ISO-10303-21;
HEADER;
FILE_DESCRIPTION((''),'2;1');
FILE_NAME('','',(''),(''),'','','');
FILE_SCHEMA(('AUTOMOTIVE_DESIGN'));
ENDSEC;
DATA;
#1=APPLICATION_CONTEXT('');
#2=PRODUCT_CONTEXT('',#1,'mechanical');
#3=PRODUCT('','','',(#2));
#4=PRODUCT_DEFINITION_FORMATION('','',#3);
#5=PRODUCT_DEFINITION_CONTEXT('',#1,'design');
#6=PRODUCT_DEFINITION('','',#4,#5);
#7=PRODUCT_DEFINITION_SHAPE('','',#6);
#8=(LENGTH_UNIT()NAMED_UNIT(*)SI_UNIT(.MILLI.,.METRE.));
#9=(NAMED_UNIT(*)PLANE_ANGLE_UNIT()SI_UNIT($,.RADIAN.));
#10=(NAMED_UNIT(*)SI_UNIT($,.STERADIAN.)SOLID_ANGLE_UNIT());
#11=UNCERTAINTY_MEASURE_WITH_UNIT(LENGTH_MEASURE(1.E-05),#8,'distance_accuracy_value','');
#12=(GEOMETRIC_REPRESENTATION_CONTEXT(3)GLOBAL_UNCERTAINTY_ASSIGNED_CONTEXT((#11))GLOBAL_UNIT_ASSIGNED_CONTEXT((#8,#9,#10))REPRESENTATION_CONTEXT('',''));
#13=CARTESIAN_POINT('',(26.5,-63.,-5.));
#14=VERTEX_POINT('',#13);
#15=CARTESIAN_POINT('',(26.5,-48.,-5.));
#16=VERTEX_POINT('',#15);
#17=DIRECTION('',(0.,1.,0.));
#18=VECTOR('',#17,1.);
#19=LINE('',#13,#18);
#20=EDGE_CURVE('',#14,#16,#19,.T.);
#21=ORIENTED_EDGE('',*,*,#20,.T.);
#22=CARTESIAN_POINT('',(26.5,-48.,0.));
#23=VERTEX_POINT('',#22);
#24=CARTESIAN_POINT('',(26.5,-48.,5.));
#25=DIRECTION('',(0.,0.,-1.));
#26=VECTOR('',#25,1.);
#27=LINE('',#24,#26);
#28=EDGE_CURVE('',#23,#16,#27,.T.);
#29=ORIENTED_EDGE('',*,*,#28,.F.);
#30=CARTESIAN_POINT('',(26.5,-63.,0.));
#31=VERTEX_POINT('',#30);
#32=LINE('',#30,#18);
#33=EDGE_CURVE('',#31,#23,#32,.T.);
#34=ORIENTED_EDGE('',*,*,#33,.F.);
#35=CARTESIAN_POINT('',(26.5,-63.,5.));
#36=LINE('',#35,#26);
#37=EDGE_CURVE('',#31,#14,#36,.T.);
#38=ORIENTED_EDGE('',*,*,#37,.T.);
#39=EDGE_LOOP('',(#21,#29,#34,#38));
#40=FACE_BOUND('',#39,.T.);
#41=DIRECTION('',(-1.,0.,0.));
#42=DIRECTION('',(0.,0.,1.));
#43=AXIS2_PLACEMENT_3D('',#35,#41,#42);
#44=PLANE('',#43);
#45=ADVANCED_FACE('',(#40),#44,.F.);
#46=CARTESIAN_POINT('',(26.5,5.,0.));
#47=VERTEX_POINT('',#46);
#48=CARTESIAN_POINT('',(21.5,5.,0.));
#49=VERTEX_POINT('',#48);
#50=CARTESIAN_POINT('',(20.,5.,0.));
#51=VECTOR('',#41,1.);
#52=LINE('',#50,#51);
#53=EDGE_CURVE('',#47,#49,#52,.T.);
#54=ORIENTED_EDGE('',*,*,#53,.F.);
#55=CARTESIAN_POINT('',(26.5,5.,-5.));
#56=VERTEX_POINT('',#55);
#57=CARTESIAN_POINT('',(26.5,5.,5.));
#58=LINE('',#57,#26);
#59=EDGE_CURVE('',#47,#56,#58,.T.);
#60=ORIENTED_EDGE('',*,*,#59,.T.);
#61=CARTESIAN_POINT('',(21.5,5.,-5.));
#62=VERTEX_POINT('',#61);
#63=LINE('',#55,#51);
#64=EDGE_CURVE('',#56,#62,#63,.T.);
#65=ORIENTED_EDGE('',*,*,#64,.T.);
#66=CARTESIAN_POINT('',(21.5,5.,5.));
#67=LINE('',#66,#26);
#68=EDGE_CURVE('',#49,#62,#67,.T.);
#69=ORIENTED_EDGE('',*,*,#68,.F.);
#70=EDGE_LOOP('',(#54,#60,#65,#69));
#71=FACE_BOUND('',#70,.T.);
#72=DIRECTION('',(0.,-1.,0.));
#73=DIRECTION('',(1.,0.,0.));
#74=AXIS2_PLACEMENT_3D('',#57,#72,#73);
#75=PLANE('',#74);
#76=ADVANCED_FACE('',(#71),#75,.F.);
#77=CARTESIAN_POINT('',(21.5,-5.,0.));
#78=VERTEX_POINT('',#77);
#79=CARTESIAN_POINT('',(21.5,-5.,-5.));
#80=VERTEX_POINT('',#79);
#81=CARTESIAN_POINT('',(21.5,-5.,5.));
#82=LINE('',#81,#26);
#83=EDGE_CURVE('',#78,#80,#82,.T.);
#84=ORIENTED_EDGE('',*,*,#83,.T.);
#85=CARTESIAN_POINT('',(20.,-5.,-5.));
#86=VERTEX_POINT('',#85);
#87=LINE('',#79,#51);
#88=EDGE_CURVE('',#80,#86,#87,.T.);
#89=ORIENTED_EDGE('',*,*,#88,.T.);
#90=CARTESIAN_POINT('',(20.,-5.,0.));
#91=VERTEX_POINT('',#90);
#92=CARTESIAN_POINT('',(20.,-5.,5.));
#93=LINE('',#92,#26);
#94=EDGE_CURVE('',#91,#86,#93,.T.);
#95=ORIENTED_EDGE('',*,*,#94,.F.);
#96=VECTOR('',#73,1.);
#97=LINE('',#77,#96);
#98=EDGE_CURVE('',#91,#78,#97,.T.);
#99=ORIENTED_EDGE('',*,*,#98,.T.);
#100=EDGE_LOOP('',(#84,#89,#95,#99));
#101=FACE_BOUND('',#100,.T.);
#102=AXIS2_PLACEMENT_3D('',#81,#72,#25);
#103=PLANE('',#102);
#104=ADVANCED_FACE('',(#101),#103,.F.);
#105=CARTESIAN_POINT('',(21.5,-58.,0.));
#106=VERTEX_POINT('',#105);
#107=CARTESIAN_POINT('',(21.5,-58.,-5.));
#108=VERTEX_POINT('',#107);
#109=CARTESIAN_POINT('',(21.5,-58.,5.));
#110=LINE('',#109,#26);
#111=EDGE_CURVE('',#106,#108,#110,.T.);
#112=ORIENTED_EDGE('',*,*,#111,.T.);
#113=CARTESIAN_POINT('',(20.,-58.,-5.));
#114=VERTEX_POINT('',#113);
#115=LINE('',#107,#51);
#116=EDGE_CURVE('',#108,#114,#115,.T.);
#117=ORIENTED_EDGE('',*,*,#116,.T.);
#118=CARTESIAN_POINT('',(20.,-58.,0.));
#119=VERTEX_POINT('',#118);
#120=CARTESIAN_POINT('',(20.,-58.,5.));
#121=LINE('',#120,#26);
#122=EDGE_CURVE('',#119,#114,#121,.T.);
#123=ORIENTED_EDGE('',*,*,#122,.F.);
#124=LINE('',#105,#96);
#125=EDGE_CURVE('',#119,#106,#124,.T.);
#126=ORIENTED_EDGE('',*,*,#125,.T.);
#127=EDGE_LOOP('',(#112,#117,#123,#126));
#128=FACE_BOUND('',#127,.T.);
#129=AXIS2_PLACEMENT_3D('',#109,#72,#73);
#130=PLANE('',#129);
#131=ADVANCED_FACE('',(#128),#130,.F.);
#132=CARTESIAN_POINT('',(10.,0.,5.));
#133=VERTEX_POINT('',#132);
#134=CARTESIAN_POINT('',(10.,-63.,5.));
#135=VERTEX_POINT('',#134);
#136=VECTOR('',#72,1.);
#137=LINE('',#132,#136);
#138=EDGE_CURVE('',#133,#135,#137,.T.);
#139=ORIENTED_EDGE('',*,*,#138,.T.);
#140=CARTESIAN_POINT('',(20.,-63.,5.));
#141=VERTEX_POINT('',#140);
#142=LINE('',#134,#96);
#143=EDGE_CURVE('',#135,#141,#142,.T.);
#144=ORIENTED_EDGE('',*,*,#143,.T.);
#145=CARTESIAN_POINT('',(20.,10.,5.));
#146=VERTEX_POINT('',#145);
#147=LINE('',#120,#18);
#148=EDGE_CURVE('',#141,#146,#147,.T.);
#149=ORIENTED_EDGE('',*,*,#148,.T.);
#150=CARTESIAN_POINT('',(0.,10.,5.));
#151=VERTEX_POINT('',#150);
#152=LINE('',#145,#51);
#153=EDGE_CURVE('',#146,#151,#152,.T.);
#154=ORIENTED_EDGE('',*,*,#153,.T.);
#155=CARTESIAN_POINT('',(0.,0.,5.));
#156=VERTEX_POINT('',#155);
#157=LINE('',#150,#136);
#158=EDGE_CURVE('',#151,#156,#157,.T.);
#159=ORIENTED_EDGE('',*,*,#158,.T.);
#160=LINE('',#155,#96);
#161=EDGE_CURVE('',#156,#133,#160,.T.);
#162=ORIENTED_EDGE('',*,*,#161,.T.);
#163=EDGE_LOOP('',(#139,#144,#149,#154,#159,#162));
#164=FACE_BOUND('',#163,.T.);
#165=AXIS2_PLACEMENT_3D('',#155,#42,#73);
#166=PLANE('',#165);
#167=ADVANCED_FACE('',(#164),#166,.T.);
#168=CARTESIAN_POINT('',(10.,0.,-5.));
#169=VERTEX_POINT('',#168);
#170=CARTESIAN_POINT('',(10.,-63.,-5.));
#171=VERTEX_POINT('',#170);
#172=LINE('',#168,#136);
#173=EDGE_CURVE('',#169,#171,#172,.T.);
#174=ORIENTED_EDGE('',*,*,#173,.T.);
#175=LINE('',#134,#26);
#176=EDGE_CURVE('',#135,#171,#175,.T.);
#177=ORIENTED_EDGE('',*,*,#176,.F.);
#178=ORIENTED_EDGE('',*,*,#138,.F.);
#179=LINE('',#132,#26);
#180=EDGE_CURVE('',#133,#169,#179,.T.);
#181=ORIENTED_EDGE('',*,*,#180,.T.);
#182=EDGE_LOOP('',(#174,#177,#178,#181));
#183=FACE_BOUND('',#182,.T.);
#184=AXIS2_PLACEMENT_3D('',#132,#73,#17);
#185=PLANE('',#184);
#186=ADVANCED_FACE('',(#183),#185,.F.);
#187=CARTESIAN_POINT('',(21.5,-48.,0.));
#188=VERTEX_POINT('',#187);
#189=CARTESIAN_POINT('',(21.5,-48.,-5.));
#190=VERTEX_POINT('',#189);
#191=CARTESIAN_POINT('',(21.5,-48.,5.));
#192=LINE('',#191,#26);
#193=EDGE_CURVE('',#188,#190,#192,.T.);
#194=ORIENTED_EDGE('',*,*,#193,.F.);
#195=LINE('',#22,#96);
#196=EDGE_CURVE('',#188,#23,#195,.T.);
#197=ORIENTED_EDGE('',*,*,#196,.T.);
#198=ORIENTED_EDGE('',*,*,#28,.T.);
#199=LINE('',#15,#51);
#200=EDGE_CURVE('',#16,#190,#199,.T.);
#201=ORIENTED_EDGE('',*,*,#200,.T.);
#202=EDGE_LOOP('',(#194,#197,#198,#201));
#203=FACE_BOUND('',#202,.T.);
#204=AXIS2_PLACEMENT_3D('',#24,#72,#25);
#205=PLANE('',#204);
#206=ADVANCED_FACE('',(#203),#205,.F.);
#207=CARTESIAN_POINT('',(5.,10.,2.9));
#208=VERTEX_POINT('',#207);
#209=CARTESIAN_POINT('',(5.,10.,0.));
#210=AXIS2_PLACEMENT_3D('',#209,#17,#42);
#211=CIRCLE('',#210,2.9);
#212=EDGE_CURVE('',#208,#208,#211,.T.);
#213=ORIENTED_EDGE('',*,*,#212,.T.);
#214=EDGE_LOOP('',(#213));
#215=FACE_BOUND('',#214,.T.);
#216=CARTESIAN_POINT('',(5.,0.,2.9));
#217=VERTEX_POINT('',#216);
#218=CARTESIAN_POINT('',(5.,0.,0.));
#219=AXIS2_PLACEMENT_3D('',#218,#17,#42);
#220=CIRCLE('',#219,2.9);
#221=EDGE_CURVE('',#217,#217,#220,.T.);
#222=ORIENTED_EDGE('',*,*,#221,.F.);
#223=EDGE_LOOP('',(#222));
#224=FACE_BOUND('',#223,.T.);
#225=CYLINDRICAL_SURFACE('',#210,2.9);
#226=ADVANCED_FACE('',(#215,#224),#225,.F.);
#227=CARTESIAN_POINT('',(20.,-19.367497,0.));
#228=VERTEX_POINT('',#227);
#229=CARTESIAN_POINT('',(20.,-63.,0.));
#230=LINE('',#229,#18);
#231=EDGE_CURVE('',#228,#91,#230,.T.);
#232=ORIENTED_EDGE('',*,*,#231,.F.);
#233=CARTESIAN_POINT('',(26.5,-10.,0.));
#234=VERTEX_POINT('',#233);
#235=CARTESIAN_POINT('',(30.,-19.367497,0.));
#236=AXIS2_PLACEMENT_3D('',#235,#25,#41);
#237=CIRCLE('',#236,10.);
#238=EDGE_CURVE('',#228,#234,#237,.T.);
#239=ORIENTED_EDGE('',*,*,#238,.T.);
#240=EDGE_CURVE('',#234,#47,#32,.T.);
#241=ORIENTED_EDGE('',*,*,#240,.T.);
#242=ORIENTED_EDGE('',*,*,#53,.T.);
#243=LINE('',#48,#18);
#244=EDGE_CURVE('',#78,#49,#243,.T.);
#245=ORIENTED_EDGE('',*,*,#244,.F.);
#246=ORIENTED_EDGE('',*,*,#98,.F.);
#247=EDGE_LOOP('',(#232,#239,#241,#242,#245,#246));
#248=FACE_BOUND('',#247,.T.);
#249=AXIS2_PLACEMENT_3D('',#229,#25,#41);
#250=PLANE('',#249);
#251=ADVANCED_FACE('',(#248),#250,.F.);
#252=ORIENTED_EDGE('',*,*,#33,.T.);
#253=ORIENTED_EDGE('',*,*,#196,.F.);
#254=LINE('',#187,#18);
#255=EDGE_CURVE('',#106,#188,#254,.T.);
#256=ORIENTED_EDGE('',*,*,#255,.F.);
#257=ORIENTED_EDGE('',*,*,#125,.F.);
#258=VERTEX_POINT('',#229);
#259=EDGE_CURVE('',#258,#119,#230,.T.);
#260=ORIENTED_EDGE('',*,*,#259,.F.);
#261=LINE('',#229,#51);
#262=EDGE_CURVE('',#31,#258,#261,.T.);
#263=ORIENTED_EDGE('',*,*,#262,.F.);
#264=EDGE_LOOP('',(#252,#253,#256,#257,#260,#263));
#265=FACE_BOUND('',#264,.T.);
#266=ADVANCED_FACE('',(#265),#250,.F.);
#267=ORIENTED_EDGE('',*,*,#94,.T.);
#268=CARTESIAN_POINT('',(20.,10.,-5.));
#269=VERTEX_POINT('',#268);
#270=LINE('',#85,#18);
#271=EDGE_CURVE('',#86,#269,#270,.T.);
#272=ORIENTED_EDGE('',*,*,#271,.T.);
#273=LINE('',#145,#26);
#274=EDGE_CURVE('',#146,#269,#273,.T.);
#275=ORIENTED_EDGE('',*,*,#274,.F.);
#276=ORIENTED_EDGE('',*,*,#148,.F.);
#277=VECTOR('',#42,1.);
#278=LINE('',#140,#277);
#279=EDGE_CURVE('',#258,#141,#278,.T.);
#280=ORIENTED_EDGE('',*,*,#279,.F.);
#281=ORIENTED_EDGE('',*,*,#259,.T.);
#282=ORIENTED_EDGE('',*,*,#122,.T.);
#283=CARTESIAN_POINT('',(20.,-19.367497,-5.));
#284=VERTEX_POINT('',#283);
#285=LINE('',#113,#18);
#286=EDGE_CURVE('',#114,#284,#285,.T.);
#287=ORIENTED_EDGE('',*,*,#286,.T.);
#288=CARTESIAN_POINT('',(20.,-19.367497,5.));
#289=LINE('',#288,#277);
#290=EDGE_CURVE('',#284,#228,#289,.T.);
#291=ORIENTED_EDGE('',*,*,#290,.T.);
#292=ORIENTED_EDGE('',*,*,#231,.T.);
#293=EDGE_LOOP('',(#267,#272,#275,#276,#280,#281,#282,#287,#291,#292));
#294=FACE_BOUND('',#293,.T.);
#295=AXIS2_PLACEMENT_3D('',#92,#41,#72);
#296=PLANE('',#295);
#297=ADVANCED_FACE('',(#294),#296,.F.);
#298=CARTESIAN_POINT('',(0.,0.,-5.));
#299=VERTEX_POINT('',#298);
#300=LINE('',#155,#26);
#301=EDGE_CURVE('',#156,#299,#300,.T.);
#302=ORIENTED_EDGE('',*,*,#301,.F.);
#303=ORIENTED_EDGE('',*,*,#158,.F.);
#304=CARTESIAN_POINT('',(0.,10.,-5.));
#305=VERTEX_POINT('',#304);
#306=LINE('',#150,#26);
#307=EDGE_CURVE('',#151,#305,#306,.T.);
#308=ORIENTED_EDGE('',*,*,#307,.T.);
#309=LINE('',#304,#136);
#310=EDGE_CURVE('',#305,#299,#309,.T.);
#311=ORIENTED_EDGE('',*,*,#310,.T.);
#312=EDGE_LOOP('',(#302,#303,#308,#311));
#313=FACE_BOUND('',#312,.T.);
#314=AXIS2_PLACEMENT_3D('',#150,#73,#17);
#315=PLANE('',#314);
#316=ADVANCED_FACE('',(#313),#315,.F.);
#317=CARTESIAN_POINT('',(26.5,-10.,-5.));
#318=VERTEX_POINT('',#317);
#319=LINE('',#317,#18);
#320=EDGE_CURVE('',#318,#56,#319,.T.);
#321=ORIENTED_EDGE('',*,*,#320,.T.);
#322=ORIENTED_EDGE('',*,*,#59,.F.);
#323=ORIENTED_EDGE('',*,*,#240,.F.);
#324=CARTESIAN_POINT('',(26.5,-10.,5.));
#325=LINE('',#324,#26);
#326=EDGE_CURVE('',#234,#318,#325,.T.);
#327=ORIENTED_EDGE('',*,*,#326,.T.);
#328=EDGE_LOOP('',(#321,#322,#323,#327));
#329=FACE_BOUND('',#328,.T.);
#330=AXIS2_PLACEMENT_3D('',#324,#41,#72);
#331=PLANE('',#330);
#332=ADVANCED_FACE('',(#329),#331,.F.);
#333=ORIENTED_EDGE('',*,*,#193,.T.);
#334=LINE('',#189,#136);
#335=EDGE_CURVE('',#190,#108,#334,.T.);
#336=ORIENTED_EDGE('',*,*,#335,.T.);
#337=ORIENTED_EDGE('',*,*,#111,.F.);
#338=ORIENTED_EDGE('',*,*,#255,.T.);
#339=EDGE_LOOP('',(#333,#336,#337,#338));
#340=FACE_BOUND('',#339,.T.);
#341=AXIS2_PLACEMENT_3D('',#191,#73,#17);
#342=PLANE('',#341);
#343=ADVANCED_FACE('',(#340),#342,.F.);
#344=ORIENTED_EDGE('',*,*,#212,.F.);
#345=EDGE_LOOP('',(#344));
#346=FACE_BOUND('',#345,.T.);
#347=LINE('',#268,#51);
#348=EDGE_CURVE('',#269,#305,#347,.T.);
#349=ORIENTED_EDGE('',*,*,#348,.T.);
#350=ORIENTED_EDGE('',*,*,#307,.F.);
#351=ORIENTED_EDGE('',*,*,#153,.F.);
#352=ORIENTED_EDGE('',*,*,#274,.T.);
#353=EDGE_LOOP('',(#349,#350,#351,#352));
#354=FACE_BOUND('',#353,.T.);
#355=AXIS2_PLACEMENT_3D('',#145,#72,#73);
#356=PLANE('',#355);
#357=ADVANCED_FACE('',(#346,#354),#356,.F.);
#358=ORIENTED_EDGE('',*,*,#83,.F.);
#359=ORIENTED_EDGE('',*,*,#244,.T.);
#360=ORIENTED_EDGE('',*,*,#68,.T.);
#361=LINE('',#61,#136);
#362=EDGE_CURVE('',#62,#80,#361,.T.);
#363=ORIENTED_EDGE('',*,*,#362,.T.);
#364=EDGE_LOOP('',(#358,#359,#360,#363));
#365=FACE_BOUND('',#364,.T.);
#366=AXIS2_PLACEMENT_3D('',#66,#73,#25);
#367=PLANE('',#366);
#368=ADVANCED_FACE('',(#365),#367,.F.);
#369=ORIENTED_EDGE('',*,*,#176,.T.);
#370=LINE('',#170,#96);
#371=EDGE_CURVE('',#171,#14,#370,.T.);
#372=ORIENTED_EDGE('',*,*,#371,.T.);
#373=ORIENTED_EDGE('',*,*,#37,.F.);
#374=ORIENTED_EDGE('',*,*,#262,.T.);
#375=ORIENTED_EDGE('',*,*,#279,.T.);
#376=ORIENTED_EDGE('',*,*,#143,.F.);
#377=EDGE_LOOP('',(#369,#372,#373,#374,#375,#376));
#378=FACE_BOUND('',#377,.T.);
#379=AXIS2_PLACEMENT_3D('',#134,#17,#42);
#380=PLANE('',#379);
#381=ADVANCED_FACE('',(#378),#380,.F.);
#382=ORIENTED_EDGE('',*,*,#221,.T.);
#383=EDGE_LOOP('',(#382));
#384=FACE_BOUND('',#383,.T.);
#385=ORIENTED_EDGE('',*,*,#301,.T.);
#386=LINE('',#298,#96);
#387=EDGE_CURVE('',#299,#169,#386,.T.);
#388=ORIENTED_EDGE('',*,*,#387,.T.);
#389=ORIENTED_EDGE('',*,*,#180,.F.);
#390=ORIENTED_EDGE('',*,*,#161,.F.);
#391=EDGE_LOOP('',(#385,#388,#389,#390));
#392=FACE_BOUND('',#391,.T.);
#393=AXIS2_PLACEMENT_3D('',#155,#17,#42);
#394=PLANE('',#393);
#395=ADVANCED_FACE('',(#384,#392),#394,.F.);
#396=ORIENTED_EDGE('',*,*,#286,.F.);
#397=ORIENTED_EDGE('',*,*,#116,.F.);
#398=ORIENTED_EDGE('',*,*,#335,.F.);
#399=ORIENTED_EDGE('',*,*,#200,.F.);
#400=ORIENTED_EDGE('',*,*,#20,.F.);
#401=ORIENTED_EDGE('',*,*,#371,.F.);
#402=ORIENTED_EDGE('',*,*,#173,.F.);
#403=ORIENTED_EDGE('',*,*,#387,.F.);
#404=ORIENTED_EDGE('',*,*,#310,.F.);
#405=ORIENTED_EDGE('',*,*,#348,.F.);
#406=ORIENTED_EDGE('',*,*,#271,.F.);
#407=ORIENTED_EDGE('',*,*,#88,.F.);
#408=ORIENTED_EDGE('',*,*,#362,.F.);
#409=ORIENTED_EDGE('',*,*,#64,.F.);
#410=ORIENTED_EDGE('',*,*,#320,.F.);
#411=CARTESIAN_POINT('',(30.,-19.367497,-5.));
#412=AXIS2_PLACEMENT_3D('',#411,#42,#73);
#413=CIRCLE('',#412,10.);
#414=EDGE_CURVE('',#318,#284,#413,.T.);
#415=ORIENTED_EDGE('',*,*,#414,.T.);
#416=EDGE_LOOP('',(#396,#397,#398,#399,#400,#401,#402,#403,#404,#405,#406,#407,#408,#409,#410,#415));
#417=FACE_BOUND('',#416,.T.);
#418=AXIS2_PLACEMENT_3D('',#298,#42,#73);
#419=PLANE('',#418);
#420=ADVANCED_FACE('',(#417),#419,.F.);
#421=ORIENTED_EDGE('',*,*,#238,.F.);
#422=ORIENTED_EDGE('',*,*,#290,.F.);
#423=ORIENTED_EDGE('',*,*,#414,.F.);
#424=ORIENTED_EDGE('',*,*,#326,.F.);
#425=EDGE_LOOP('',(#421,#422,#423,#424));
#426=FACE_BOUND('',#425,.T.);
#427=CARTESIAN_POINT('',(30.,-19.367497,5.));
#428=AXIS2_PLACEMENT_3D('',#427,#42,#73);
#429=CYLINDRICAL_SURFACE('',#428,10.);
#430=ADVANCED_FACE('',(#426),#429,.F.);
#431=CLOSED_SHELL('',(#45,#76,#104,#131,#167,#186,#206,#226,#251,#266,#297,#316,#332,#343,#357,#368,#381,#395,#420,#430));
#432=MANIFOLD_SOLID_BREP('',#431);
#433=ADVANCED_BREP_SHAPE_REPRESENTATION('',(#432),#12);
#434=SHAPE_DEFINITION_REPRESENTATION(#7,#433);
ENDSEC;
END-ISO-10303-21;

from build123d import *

# Parameters (mm, degrees)
BOSS_EXTRUDE1_DEPTH  = 5
SKETCH2_W            = 6.5
SKETCH2_H            = 5
CUT_EXTRUDE1_DEPTH   = 74.152238517
FILLET1_R            = 10
M5_CLEARANCE_HOLE1_D = 5.8


with BuildPart() as part:
    # Sketch1 → Boss-Extrude1 (new, symmetric)
    with BuildSketch(Plane.XY):
        Polygon((0, 0), (10, 0), (10, -63), (26.5, -63), (26.5, -48), (21.5, -48), (21.5, -58), (20, -58), (20, -10), (26.5, -10), (26.5, 5), (21.5, 5), (21.5, -5), (20, -5), (20, 10), (0, 10), align=None)
    extrude(amount=BOSS_EXTRUDE1_DEPTH, both=True)

    # Sketch2 → Cut-Extrude1 (cut, through all)
    with BuildSketch(Plane(origin=(0, 5, 0), x_dir=(1, 0, 0), z_dir=(0, 1, 0))):
        with Locations((23.25, -2.5)):
            Rectangle(SKETCH2_W, SKETCH2_H)
    extrude(amount=-CUT_EXTRUDE1_DEPTH, mode=Mode.SUBTRACT)

    # Fillet1
    # the kernel refuses this fillet: 10 mm, written as the material it adds along each edge
    with BuildSketch(Plane(origin=(20, -10, -5), x_dir=(0, -1, 0), z_dir=(0, 0, 1))) as fillet1_piece_1:
        with BuildLine():
            CenterArc((9.367496998, 10), FILLET1_R, 200.487315115, 69.512684885)
            Line((0, 6.5), (-0.18734994, 6.43))
            ThreePointArc((-0.18734994, 6.43), (-0.2, 3.25), (-0.2, 0))
            Line((-0.2, 0), (0, -0.2))
            Line((0, -0.2), (9.367496998, -0.2))
            Line((9.367496998, -0.2), (9.367496998, 0))
        make_face()
    extrude(amount=5)

    # M5 Clearance Hole1 (through all)
    with Locations(Plane(origin=(0, 10, 0), x_dir=(1, 0, 0), z_dir=(0, 1, 0))):
        with Locations((5, 0)):
            Hole(M5_CLEARANCE_HOLE1_D / 2)


solid = part.part
